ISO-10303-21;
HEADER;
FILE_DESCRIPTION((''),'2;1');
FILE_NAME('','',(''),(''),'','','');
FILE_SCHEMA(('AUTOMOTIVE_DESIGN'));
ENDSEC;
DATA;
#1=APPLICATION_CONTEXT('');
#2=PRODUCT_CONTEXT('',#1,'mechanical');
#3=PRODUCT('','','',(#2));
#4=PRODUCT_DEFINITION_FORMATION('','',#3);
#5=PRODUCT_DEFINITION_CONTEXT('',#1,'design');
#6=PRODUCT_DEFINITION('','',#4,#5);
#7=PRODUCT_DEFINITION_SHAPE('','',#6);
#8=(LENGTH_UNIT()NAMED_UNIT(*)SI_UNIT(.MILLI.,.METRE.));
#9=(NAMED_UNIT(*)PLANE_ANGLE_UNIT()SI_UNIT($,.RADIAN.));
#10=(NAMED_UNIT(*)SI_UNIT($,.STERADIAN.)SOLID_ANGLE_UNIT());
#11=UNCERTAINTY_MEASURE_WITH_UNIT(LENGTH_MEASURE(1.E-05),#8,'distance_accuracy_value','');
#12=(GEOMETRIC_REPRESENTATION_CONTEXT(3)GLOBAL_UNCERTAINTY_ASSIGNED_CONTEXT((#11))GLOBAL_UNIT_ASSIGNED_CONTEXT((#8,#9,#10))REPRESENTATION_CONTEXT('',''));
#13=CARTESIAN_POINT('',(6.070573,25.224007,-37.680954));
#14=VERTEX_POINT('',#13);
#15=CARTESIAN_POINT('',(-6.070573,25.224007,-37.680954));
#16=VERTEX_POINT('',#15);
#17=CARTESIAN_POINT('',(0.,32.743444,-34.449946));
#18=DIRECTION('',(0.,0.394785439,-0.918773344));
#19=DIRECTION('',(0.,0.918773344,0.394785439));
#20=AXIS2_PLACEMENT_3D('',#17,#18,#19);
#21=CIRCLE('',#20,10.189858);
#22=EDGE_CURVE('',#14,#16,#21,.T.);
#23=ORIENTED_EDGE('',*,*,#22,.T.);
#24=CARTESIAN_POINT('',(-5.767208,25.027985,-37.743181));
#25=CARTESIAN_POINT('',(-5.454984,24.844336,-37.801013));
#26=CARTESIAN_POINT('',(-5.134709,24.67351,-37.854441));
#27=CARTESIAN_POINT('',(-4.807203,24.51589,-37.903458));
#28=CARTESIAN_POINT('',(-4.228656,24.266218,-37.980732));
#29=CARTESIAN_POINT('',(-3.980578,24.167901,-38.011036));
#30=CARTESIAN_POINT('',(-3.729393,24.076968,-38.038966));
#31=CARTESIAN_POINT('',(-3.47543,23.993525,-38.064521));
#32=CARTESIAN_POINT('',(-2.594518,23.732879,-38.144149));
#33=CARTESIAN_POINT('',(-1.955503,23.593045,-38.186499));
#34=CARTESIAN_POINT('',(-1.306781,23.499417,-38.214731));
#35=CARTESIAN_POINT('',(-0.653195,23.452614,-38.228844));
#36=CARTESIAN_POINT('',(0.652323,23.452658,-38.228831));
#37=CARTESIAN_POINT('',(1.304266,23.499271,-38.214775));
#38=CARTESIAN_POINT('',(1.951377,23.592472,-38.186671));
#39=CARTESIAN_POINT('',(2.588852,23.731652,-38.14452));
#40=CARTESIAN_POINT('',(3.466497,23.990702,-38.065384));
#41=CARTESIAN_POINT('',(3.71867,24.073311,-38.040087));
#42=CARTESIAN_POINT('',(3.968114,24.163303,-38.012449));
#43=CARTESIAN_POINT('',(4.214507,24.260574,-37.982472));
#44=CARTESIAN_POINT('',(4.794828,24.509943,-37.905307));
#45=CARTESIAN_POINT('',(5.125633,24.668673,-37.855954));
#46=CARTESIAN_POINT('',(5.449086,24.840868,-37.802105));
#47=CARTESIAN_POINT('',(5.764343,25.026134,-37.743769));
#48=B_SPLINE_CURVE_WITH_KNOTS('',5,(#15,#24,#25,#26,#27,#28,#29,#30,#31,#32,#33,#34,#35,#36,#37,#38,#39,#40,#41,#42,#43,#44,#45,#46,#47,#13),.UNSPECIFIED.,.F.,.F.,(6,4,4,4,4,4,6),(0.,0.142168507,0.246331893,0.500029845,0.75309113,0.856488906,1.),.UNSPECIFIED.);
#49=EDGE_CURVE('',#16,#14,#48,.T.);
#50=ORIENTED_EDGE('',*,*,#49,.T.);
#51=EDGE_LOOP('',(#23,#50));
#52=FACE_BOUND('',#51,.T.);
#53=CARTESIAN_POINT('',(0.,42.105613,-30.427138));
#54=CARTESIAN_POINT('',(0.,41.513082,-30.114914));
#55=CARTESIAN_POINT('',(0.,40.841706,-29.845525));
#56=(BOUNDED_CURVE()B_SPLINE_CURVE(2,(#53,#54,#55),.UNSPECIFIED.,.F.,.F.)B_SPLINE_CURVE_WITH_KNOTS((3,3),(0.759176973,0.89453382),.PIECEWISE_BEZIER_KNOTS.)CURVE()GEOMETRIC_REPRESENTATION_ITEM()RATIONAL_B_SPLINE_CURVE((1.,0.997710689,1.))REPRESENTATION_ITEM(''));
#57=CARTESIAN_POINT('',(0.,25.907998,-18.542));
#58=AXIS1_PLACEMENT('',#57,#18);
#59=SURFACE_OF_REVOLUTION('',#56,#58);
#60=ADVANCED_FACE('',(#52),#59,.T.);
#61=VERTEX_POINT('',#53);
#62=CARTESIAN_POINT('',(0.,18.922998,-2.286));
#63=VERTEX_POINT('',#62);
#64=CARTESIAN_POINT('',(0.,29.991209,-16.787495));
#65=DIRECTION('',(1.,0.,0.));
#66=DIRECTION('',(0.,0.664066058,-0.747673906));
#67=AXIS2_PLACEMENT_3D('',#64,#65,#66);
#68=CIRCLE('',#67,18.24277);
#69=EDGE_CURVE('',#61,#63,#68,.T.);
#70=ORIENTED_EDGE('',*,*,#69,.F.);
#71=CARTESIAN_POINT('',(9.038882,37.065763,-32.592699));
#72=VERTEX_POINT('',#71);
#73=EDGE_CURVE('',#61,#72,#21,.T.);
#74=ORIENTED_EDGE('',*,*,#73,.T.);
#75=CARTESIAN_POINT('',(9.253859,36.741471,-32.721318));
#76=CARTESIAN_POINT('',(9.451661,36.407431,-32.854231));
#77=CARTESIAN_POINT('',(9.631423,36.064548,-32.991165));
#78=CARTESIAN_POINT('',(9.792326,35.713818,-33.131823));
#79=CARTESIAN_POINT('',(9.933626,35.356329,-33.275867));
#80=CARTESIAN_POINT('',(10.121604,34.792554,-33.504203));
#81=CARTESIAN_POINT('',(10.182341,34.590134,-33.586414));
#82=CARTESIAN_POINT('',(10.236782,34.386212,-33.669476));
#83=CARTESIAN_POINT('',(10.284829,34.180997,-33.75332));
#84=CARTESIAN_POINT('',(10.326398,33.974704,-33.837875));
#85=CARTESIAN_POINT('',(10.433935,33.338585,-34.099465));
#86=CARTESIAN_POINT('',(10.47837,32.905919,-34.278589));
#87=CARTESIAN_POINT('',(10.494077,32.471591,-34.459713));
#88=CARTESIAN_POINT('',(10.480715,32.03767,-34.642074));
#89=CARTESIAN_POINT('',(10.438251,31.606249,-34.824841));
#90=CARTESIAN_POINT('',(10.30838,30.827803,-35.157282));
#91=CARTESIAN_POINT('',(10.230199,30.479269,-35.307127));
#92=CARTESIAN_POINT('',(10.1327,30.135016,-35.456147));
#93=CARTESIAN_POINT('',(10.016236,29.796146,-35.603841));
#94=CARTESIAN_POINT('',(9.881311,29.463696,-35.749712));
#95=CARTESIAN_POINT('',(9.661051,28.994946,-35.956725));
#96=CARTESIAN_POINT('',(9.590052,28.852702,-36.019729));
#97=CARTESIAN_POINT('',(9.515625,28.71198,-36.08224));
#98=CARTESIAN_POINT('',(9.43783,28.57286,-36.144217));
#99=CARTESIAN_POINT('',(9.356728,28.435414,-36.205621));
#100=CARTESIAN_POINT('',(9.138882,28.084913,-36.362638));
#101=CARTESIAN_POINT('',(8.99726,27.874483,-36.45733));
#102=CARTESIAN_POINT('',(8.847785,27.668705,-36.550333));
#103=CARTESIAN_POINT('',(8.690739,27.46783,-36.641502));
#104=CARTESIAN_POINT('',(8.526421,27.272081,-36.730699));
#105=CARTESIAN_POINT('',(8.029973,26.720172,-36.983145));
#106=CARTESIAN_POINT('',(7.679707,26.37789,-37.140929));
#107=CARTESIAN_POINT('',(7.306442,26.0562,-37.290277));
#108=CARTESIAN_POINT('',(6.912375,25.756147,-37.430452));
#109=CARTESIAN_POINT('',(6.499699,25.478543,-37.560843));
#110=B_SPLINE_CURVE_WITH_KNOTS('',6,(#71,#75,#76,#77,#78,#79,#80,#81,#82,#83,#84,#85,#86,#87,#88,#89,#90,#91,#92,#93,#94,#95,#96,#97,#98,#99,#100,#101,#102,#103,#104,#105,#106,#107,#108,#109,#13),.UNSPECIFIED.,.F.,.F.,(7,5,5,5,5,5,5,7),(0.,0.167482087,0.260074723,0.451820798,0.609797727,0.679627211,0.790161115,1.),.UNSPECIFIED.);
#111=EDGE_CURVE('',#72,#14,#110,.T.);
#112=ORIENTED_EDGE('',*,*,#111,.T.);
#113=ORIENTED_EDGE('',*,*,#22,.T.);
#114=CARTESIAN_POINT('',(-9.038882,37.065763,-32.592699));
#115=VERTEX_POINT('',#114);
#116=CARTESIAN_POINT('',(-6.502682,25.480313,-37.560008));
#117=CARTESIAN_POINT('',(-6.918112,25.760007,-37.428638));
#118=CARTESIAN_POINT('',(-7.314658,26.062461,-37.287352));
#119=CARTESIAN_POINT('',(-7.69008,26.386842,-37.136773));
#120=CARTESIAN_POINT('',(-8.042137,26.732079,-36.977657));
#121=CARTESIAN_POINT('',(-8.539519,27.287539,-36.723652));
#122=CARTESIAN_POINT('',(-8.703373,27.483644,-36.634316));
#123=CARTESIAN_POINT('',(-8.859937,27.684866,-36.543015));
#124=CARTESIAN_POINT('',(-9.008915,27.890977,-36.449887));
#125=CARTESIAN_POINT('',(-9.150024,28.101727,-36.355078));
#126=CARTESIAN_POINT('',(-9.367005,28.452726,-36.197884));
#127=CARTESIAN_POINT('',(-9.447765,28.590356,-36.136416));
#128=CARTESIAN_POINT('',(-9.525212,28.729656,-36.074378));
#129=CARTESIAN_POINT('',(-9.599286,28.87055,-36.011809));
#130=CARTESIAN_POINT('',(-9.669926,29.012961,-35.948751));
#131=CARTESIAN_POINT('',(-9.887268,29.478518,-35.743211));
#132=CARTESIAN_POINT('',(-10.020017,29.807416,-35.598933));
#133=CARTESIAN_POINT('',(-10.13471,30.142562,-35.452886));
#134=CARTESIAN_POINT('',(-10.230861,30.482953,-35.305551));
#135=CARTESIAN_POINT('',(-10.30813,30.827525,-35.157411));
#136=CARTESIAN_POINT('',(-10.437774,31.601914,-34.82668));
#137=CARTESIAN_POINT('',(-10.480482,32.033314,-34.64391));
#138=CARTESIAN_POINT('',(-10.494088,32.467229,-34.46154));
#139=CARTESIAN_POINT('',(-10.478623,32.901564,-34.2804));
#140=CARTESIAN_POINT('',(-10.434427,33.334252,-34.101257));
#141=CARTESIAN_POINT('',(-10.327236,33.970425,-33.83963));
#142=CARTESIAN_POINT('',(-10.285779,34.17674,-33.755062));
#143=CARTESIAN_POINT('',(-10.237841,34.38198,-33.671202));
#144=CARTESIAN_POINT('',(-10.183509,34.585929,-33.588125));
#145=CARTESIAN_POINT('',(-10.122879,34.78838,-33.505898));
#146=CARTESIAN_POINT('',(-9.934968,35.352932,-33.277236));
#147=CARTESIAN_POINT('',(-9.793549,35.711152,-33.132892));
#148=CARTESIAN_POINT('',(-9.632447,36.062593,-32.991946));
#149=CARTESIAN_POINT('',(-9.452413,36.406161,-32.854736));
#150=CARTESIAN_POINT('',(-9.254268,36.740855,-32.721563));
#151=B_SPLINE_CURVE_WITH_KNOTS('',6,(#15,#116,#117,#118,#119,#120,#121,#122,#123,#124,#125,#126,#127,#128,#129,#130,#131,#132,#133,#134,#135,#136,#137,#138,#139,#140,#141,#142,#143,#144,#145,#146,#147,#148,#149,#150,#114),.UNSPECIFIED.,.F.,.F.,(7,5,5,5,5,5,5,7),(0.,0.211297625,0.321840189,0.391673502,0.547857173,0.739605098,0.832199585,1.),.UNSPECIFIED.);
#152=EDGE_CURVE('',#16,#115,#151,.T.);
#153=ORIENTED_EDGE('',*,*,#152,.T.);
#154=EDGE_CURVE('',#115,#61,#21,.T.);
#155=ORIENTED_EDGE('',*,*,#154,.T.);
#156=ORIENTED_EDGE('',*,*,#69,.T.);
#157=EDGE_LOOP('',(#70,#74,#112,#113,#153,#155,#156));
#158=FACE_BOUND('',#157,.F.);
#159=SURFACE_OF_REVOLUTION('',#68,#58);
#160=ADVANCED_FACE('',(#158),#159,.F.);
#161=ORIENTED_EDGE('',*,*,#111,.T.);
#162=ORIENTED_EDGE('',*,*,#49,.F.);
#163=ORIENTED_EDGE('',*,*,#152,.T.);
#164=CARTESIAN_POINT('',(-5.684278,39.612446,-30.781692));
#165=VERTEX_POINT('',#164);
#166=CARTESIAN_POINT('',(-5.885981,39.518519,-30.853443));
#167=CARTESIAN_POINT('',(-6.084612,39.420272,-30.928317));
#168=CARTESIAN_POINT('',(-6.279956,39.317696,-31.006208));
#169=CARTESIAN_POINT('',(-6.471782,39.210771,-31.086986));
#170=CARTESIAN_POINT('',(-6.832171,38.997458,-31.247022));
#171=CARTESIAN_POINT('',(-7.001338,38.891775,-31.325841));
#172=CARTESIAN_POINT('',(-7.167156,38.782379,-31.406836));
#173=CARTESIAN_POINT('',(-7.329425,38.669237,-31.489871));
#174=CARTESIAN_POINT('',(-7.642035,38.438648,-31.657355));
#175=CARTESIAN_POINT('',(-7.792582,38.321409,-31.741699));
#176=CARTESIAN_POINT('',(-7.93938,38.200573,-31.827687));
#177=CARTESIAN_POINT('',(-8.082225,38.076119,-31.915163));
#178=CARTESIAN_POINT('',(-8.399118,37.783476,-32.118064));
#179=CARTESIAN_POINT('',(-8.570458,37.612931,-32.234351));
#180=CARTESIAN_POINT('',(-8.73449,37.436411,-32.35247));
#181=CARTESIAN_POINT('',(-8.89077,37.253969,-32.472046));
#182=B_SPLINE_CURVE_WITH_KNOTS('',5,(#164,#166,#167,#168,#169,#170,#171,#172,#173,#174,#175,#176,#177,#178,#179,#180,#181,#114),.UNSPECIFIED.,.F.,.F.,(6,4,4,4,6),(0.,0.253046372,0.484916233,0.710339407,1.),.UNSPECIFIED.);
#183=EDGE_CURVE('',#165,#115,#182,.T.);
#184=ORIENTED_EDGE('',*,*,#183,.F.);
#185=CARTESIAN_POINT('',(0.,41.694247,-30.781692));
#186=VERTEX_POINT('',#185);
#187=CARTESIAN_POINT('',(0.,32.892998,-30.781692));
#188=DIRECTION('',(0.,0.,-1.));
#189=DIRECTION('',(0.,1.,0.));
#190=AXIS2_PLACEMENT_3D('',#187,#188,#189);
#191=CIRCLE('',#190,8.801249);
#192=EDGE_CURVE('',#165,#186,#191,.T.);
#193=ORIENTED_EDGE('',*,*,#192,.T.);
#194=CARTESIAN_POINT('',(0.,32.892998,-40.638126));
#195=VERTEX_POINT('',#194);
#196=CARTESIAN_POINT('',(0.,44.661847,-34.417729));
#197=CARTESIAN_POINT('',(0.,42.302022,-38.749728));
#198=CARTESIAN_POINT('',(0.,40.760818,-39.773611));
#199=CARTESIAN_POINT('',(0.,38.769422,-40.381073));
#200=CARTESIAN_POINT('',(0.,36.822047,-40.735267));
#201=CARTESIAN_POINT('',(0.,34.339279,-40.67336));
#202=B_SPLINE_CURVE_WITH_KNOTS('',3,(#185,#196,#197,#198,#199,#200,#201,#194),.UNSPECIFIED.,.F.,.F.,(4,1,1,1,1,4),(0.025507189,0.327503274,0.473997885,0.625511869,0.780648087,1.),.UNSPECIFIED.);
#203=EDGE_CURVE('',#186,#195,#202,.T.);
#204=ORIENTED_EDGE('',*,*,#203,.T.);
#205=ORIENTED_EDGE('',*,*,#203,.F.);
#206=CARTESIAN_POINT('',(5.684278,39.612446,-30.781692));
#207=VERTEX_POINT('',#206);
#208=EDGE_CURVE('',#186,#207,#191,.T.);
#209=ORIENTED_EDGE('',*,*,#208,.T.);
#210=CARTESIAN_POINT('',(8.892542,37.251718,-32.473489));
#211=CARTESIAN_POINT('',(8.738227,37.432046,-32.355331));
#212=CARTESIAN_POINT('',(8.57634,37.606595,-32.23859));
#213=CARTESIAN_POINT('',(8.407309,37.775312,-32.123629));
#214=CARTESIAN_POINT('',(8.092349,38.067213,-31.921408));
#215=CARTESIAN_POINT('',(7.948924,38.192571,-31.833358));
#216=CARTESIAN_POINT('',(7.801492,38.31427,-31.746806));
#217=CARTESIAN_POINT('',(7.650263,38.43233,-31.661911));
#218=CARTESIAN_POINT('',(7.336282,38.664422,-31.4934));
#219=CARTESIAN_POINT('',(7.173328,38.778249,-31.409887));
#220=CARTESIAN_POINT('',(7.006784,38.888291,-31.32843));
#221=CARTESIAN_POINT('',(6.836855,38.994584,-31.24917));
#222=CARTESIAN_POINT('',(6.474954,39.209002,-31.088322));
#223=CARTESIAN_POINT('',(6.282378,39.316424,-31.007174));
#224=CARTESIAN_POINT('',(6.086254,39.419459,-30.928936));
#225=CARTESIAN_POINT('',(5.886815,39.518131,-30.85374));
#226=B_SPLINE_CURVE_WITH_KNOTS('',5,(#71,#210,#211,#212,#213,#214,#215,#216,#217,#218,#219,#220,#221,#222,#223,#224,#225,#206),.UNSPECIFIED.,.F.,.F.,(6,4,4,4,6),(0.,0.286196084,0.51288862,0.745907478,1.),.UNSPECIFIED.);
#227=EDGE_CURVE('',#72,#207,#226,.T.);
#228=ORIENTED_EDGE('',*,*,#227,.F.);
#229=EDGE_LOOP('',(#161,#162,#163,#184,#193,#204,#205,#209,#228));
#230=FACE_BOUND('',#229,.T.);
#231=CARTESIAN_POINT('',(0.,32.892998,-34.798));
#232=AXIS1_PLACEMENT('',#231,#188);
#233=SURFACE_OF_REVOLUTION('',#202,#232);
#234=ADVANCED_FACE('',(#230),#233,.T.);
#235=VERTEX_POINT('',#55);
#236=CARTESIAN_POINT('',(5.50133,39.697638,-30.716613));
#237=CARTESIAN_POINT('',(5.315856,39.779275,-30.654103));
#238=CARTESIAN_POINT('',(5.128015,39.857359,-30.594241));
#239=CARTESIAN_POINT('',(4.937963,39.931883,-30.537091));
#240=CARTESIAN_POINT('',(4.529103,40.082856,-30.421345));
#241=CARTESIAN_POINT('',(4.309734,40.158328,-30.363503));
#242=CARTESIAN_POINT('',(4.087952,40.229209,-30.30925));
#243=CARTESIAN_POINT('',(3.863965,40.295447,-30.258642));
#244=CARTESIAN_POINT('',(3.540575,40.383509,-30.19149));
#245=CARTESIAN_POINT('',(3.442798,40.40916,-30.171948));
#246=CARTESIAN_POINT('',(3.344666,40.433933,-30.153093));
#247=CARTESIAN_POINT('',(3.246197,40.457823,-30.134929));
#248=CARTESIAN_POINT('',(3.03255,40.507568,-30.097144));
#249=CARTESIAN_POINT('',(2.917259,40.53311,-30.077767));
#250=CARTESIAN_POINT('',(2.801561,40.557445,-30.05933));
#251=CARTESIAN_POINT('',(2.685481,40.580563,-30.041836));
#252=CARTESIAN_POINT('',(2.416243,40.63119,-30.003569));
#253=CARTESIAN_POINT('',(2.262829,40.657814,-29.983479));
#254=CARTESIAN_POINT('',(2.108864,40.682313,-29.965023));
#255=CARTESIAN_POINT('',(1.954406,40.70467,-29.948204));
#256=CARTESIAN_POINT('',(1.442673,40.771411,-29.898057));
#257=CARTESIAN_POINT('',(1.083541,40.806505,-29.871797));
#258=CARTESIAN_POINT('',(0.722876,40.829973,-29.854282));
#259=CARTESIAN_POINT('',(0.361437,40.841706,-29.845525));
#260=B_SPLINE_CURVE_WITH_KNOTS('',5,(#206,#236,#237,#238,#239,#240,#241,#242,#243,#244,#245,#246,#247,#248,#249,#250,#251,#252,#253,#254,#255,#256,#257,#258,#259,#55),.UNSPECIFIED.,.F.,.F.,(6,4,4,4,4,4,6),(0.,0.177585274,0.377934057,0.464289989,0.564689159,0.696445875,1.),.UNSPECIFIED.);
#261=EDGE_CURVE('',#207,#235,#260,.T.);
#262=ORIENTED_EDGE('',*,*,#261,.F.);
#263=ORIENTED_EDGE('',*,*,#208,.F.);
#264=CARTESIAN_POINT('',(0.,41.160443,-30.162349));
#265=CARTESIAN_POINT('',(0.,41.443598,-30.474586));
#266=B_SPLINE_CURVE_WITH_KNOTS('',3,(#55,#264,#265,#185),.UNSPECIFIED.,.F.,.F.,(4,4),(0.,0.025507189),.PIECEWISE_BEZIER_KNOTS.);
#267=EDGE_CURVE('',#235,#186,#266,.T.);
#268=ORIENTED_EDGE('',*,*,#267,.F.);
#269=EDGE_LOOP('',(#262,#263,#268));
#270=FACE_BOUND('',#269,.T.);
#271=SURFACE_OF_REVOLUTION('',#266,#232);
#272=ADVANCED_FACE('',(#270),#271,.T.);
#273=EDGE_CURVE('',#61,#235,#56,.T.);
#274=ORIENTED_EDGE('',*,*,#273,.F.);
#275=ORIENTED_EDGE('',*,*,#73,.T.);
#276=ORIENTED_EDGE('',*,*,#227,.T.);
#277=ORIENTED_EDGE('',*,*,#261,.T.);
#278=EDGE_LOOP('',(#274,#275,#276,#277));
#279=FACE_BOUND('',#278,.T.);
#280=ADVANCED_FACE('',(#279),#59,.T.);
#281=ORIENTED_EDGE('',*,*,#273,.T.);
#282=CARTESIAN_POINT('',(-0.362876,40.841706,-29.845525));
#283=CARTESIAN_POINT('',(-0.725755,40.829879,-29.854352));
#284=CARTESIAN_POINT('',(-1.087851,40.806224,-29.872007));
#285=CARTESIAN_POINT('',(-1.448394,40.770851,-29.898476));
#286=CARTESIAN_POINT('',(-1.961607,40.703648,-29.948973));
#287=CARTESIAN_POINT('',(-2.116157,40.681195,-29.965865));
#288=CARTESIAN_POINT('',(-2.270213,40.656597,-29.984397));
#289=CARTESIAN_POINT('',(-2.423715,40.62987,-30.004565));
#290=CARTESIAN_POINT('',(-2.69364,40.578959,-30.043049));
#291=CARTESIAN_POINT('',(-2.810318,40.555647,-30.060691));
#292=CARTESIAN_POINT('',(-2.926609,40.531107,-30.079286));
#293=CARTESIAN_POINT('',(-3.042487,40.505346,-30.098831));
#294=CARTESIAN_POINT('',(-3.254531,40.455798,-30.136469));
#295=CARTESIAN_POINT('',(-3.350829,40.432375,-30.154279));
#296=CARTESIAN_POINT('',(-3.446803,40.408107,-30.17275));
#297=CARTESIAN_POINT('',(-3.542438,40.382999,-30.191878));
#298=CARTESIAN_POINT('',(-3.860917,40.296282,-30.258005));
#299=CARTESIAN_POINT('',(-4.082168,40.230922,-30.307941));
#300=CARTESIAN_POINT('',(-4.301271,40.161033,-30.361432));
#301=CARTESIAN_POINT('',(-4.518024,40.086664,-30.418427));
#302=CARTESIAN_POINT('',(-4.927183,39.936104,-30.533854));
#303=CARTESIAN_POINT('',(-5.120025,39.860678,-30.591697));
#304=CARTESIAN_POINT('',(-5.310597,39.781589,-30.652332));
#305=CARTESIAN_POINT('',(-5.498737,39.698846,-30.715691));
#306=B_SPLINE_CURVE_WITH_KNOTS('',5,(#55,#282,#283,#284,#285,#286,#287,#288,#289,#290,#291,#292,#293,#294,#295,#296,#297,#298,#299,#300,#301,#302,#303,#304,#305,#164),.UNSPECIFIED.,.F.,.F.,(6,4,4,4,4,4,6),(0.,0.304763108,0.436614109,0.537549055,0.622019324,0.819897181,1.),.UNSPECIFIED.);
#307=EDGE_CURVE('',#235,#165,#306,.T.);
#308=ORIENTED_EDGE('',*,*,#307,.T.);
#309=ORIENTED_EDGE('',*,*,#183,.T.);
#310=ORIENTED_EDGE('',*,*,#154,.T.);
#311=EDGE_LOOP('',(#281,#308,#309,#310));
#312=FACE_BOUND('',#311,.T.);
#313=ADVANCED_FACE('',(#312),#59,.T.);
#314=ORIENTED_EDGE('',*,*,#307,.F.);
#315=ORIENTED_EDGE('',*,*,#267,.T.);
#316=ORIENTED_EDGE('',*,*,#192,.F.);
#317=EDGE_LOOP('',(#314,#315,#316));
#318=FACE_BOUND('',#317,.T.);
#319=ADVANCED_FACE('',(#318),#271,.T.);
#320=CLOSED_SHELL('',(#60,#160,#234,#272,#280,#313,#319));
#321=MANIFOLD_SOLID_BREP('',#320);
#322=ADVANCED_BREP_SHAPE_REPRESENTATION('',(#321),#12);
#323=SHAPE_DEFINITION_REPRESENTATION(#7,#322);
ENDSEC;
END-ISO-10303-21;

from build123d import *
from build123d import SkipClean  # not in build123d's __all__


with BuildPart() as f1:
    # F0 (on Right) → F1 (revolve)
    with BuildSketch(Plane.YZ):
        with BuildLine():
            add(Edge.make_bspline(
                [(40.8417056283, -29.8455245679), (37.35877147, -28.4480000079), (32.8929983079, -28.4480000079)],
                knots=[0.8945338201, 0.8945338201, 0.8945338201, 1.5707963268, 1.5707963268, 1.5707963268], degree=2, weights=[1, 0.9433762219, 1]))
            add(Edge.make_bspline(
                [(42.105613437, -30.4271384657), (41.5130824533, -30.1149139847), (40.8417056283, -29.8455245679)],
                knots=[0.7591769731, 0.7591769731, 0.7591769731, 0.8945338201, 0.8945338201, 0.8945338201], degree=2, weights=[1, 0.9977106895, 1]))
            ThreePointArc((42.105613437, -30.4271384657), (44.0714983156, -5.1881798652), (18.9229976386, -2.2859999444))
            Line((18.9229976386, -2.2859999444), (30.2253543952, -28.589665369))
            add(Edge.make_bspline(
                [(32.8929983079, -28.4480000079), (31.5441300596, -28.4480000079), (30.2253543952, -28.589665369)],
                knots=[1.5707963268, 1.5707963268, 1.5707963268, 1.782423145, 1.782423145, 1.782423145], degree=2, weights=[1, 0.9944069827, 1]))
        make_face()
    revolve(axis=Axis((0, 25.9079979733, -18.5419999762), (0, 0.3947854392, -0.9187733436)))

    # F0 (on Right) → F2 (revolve)
    with BuildSketch(Plane.YZ):
        with BuildLine():
            add(Edge.make_bspline(
                [(40.8417056283, -29.8455245679), (41.1604426392, -30.1623492327), (41.4435980593, -30.4745855709), (41.6942473899, -30.7816924182)],
                knots=[0, 0, 0, 0, 0.0255071894, 0.0255071894, 0.0255071894, 0.0255071894], degree=3))
            add(Edge.make_bspline(
                [(40.8417056283, -29.8455245679), (37.35877147, -28.4480000079), (32.8929983079, -28.4480000079)],
                knots=[0.8945338201, 0.8945338201, 0.8945338201, 1.5707963268, 1.5707963268, 1.5707963268], degree=2, weights=[1, 0.9433762219, 1]))
            Line((32.8929983079, -28.4480000079), (32.8929983079, -34.7980000079))
            Line((32.8929983079, -34.7980000079), (32.8929983079, -40.6381264329))
            add(Edge.make_bspline(
                [(41.6942473899, -30.7816924182), (44.6618466499, -34.4177286711), (42.3020218601, -38.7497275544), (40.7608179336, -39.7736108081), (38.7694217239, -40.3810728072), (36.8220473508, -40.7352669513), (34.3392785671, -40.673359824), (32.8929983079, -40.6381264329)],
                knots=[0.0255071894, 0.0255071894, 0.0255071894, 0.0255071894, 0.3275032737, 0.4739978855, 0.6255118689, 0.7806480871, 1, 1, 1, 1], degree=3))
        make_face()
    with SkipClean():  # cleaning this boolean's faces spoils the solid; the shape is the same uncleaned
        revolve(axis=Axis((0, 32.8929983079, -34.7980000079), (0, 0, -1)))


solid = f1.part
